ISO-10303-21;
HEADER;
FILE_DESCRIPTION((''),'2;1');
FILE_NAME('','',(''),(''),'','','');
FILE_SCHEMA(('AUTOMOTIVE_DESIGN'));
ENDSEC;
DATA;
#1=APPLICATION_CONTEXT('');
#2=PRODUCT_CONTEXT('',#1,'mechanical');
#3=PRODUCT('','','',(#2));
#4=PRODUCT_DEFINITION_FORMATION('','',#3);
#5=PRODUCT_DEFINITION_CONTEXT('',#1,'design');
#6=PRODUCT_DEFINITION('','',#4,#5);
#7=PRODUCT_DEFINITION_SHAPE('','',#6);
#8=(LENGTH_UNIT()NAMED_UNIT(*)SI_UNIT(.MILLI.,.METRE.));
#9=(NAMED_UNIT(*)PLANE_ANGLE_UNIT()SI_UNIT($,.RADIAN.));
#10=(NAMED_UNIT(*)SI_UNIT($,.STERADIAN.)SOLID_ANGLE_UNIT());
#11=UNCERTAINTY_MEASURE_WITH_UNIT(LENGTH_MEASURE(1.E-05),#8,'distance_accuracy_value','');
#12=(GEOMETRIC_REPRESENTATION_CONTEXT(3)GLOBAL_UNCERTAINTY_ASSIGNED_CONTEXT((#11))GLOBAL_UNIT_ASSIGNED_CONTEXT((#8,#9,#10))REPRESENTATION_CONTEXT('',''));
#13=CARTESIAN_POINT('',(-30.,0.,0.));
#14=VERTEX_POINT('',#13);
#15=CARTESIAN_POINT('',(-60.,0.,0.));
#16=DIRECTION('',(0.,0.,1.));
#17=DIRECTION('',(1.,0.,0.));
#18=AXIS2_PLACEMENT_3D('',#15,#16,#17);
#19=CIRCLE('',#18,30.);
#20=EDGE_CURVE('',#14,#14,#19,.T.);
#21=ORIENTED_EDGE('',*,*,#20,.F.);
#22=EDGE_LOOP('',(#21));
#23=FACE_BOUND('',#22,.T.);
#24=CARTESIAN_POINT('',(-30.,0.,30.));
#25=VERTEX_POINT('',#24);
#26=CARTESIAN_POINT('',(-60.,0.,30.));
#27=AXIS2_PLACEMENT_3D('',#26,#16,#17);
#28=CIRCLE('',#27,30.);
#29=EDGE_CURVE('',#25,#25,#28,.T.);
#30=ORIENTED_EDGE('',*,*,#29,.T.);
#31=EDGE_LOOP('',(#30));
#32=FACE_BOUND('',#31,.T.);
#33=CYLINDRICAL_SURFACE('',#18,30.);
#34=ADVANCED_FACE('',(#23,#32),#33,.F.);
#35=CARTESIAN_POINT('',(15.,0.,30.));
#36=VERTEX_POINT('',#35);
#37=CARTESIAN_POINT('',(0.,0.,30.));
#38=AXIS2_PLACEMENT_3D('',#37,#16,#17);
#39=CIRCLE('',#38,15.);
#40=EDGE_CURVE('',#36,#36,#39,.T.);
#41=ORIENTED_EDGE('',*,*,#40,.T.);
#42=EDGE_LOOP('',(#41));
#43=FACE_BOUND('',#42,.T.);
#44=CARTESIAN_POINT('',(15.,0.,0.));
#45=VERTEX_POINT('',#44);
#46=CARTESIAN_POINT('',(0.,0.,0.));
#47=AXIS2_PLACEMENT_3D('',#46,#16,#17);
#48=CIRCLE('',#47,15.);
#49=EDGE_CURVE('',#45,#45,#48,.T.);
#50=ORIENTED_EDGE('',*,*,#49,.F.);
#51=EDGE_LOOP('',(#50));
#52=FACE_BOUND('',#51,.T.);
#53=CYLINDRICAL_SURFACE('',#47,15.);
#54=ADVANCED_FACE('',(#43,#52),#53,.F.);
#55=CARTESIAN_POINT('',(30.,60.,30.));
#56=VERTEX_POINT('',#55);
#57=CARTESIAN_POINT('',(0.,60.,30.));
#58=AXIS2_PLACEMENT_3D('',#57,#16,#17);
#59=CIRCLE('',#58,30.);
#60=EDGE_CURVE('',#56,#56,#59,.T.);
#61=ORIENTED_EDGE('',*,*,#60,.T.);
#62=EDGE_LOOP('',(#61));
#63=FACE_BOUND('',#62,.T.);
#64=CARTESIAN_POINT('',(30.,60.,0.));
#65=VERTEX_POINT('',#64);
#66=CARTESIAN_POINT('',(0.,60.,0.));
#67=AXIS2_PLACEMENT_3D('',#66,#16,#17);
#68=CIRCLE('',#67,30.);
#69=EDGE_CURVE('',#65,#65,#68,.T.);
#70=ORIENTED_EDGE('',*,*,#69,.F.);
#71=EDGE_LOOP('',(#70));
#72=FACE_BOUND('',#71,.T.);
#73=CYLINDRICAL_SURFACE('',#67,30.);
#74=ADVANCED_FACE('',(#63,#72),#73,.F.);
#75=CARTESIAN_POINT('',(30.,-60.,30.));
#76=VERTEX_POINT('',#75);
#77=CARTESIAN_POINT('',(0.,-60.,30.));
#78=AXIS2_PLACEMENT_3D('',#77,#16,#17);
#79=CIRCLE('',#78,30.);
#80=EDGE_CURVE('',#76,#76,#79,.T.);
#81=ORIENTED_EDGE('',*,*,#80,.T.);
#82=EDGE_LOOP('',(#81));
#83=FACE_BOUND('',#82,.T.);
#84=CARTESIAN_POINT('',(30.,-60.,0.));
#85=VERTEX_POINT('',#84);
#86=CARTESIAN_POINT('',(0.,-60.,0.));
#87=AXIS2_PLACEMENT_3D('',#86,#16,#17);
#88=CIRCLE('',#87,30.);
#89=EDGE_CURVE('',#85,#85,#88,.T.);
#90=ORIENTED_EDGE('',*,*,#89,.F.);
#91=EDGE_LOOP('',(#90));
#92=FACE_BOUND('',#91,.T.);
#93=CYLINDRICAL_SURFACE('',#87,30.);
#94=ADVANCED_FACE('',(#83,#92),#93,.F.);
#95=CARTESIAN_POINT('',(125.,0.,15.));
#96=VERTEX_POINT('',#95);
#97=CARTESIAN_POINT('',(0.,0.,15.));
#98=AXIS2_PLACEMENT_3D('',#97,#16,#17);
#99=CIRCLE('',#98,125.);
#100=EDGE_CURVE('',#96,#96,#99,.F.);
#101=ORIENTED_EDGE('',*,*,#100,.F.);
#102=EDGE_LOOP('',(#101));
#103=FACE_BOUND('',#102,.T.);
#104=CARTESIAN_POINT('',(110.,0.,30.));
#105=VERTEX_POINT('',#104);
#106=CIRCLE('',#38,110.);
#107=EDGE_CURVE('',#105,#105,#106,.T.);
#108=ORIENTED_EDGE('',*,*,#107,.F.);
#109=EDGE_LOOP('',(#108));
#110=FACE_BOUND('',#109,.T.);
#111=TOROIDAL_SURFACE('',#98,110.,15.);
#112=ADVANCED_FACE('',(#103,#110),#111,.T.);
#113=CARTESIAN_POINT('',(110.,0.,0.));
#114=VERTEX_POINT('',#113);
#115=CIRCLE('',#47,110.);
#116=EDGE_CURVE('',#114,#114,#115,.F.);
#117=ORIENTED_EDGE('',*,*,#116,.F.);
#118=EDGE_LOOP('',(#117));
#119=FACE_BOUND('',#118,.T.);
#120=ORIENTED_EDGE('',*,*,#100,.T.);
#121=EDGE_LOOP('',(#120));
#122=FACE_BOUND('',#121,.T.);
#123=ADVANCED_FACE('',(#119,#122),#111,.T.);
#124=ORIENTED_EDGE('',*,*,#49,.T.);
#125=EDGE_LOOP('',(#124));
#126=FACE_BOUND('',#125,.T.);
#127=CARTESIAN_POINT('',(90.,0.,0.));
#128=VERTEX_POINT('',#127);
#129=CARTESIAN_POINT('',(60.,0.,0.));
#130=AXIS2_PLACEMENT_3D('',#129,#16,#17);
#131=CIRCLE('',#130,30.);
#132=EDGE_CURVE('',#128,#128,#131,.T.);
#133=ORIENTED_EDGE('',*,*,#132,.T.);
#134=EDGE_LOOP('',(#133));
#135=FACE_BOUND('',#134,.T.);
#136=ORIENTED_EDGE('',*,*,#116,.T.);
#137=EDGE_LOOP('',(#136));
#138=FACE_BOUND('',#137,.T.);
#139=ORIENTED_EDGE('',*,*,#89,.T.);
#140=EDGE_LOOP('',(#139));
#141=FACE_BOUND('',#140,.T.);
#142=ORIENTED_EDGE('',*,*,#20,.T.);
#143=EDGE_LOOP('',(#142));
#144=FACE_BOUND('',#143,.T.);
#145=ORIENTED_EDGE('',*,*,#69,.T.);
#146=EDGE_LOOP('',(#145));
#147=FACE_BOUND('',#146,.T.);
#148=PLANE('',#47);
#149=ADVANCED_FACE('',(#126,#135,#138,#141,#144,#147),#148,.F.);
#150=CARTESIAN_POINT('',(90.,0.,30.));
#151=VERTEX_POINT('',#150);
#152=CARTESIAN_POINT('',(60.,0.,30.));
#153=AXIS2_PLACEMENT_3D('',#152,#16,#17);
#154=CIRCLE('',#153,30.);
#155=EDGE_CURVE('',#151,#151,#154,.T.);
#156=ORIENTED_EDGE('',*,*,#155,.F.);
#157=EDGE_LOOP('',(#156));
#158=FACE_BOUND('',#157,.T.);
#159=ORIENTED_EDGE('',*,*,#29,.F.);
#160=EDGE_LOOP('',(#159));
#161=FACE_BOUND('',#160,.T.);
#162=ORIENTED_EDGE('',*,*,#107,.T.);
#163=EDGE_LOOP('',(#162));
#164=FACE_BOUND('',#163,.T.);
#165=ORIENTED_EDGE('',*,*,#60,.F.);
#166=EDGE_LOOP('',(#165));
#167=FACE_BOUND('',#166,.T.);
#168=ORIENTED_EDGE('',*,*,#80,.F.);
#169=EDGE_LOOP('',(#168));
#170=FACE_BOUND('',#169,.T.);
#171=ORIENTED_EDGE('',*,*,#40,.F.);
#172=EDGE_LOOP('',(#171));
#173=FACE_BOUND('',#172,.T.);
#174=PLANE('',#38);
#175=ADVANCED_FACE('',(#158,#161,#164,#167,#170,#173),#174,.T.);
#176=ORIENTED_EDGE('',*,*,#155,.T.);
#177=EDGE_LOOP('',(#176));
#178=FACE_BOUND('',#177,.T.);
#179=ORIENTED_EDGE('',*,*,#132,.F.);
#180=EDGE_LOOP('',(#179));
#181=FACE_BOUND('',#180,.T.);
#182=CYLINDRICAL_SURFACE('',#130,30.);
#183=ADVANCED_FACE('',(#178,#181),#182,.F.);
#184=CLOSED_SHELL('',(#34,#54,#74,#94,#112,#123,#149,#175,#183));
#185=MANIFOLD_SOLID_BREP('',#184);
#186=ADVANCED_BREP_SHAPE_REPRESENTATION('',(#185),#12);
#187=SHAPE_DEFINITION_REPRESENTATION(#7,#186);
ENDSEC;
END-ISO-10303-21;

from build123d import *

# Parameters (mm, degrees)
SKETCH2_R           = 125
BOSS_EXTRUDE1_DEPTH = 30
FILLET1_R           = 15
SKETCH3_R           = 15
CUT_EXTRUDE1_DEPTH  = 180.30421077
SKETCH6_R           = 30
CUT_EXTRUDE2_DEPTH  = 180.30421077


with BuildPart() as part:
    # Sketch2 → Boss-Extrude1 (new body)
    with BuildSketch(Plane.XY):
        Circle(SKETCH2_R)
    extrude(amount=BOSS_EXTRUDE1_DEPTH)

    # Fillet1
    fillet1_edges = [part.edges().sort_by_distance(p)[0] for p in [
        (-125, 0, 0),
        (-125, 0, 30),
    ]]
    fillet(fillet1_edges, radius=FILLET1_R - 0.0001)  # a hair under: the kernel refuses the full size

    # Sketch3 → Cut-Extrude1 (cut, through all)
    with BuildSketch(Plane.XY.offset(30)):
        Circle(SKETCH3_R)
    extrude(amount=-CUT_EXTRUDE1_DEPTH, mode=Mode.SUBTRACT)

    # Sketch6 → Cut-Extrude2 (cut, through all)
    with BuildSketch(Plane.XY.offset(30)):
        with Locations((0, 60)):
            Circle(SKETCH6_R)
        with Locations((60, 0)):
            Circle(SKETCH6_R)
        with Locations((0, -60)):
            Circle(SKETCH6_R)
        with Locations((-60, 0)):
            Circle(SKETCH6_R)
    extrude(amount=-CUT_EXTRUDE2_DEPTH, mode=Mode.SUBTRACT)


solid = part.part
